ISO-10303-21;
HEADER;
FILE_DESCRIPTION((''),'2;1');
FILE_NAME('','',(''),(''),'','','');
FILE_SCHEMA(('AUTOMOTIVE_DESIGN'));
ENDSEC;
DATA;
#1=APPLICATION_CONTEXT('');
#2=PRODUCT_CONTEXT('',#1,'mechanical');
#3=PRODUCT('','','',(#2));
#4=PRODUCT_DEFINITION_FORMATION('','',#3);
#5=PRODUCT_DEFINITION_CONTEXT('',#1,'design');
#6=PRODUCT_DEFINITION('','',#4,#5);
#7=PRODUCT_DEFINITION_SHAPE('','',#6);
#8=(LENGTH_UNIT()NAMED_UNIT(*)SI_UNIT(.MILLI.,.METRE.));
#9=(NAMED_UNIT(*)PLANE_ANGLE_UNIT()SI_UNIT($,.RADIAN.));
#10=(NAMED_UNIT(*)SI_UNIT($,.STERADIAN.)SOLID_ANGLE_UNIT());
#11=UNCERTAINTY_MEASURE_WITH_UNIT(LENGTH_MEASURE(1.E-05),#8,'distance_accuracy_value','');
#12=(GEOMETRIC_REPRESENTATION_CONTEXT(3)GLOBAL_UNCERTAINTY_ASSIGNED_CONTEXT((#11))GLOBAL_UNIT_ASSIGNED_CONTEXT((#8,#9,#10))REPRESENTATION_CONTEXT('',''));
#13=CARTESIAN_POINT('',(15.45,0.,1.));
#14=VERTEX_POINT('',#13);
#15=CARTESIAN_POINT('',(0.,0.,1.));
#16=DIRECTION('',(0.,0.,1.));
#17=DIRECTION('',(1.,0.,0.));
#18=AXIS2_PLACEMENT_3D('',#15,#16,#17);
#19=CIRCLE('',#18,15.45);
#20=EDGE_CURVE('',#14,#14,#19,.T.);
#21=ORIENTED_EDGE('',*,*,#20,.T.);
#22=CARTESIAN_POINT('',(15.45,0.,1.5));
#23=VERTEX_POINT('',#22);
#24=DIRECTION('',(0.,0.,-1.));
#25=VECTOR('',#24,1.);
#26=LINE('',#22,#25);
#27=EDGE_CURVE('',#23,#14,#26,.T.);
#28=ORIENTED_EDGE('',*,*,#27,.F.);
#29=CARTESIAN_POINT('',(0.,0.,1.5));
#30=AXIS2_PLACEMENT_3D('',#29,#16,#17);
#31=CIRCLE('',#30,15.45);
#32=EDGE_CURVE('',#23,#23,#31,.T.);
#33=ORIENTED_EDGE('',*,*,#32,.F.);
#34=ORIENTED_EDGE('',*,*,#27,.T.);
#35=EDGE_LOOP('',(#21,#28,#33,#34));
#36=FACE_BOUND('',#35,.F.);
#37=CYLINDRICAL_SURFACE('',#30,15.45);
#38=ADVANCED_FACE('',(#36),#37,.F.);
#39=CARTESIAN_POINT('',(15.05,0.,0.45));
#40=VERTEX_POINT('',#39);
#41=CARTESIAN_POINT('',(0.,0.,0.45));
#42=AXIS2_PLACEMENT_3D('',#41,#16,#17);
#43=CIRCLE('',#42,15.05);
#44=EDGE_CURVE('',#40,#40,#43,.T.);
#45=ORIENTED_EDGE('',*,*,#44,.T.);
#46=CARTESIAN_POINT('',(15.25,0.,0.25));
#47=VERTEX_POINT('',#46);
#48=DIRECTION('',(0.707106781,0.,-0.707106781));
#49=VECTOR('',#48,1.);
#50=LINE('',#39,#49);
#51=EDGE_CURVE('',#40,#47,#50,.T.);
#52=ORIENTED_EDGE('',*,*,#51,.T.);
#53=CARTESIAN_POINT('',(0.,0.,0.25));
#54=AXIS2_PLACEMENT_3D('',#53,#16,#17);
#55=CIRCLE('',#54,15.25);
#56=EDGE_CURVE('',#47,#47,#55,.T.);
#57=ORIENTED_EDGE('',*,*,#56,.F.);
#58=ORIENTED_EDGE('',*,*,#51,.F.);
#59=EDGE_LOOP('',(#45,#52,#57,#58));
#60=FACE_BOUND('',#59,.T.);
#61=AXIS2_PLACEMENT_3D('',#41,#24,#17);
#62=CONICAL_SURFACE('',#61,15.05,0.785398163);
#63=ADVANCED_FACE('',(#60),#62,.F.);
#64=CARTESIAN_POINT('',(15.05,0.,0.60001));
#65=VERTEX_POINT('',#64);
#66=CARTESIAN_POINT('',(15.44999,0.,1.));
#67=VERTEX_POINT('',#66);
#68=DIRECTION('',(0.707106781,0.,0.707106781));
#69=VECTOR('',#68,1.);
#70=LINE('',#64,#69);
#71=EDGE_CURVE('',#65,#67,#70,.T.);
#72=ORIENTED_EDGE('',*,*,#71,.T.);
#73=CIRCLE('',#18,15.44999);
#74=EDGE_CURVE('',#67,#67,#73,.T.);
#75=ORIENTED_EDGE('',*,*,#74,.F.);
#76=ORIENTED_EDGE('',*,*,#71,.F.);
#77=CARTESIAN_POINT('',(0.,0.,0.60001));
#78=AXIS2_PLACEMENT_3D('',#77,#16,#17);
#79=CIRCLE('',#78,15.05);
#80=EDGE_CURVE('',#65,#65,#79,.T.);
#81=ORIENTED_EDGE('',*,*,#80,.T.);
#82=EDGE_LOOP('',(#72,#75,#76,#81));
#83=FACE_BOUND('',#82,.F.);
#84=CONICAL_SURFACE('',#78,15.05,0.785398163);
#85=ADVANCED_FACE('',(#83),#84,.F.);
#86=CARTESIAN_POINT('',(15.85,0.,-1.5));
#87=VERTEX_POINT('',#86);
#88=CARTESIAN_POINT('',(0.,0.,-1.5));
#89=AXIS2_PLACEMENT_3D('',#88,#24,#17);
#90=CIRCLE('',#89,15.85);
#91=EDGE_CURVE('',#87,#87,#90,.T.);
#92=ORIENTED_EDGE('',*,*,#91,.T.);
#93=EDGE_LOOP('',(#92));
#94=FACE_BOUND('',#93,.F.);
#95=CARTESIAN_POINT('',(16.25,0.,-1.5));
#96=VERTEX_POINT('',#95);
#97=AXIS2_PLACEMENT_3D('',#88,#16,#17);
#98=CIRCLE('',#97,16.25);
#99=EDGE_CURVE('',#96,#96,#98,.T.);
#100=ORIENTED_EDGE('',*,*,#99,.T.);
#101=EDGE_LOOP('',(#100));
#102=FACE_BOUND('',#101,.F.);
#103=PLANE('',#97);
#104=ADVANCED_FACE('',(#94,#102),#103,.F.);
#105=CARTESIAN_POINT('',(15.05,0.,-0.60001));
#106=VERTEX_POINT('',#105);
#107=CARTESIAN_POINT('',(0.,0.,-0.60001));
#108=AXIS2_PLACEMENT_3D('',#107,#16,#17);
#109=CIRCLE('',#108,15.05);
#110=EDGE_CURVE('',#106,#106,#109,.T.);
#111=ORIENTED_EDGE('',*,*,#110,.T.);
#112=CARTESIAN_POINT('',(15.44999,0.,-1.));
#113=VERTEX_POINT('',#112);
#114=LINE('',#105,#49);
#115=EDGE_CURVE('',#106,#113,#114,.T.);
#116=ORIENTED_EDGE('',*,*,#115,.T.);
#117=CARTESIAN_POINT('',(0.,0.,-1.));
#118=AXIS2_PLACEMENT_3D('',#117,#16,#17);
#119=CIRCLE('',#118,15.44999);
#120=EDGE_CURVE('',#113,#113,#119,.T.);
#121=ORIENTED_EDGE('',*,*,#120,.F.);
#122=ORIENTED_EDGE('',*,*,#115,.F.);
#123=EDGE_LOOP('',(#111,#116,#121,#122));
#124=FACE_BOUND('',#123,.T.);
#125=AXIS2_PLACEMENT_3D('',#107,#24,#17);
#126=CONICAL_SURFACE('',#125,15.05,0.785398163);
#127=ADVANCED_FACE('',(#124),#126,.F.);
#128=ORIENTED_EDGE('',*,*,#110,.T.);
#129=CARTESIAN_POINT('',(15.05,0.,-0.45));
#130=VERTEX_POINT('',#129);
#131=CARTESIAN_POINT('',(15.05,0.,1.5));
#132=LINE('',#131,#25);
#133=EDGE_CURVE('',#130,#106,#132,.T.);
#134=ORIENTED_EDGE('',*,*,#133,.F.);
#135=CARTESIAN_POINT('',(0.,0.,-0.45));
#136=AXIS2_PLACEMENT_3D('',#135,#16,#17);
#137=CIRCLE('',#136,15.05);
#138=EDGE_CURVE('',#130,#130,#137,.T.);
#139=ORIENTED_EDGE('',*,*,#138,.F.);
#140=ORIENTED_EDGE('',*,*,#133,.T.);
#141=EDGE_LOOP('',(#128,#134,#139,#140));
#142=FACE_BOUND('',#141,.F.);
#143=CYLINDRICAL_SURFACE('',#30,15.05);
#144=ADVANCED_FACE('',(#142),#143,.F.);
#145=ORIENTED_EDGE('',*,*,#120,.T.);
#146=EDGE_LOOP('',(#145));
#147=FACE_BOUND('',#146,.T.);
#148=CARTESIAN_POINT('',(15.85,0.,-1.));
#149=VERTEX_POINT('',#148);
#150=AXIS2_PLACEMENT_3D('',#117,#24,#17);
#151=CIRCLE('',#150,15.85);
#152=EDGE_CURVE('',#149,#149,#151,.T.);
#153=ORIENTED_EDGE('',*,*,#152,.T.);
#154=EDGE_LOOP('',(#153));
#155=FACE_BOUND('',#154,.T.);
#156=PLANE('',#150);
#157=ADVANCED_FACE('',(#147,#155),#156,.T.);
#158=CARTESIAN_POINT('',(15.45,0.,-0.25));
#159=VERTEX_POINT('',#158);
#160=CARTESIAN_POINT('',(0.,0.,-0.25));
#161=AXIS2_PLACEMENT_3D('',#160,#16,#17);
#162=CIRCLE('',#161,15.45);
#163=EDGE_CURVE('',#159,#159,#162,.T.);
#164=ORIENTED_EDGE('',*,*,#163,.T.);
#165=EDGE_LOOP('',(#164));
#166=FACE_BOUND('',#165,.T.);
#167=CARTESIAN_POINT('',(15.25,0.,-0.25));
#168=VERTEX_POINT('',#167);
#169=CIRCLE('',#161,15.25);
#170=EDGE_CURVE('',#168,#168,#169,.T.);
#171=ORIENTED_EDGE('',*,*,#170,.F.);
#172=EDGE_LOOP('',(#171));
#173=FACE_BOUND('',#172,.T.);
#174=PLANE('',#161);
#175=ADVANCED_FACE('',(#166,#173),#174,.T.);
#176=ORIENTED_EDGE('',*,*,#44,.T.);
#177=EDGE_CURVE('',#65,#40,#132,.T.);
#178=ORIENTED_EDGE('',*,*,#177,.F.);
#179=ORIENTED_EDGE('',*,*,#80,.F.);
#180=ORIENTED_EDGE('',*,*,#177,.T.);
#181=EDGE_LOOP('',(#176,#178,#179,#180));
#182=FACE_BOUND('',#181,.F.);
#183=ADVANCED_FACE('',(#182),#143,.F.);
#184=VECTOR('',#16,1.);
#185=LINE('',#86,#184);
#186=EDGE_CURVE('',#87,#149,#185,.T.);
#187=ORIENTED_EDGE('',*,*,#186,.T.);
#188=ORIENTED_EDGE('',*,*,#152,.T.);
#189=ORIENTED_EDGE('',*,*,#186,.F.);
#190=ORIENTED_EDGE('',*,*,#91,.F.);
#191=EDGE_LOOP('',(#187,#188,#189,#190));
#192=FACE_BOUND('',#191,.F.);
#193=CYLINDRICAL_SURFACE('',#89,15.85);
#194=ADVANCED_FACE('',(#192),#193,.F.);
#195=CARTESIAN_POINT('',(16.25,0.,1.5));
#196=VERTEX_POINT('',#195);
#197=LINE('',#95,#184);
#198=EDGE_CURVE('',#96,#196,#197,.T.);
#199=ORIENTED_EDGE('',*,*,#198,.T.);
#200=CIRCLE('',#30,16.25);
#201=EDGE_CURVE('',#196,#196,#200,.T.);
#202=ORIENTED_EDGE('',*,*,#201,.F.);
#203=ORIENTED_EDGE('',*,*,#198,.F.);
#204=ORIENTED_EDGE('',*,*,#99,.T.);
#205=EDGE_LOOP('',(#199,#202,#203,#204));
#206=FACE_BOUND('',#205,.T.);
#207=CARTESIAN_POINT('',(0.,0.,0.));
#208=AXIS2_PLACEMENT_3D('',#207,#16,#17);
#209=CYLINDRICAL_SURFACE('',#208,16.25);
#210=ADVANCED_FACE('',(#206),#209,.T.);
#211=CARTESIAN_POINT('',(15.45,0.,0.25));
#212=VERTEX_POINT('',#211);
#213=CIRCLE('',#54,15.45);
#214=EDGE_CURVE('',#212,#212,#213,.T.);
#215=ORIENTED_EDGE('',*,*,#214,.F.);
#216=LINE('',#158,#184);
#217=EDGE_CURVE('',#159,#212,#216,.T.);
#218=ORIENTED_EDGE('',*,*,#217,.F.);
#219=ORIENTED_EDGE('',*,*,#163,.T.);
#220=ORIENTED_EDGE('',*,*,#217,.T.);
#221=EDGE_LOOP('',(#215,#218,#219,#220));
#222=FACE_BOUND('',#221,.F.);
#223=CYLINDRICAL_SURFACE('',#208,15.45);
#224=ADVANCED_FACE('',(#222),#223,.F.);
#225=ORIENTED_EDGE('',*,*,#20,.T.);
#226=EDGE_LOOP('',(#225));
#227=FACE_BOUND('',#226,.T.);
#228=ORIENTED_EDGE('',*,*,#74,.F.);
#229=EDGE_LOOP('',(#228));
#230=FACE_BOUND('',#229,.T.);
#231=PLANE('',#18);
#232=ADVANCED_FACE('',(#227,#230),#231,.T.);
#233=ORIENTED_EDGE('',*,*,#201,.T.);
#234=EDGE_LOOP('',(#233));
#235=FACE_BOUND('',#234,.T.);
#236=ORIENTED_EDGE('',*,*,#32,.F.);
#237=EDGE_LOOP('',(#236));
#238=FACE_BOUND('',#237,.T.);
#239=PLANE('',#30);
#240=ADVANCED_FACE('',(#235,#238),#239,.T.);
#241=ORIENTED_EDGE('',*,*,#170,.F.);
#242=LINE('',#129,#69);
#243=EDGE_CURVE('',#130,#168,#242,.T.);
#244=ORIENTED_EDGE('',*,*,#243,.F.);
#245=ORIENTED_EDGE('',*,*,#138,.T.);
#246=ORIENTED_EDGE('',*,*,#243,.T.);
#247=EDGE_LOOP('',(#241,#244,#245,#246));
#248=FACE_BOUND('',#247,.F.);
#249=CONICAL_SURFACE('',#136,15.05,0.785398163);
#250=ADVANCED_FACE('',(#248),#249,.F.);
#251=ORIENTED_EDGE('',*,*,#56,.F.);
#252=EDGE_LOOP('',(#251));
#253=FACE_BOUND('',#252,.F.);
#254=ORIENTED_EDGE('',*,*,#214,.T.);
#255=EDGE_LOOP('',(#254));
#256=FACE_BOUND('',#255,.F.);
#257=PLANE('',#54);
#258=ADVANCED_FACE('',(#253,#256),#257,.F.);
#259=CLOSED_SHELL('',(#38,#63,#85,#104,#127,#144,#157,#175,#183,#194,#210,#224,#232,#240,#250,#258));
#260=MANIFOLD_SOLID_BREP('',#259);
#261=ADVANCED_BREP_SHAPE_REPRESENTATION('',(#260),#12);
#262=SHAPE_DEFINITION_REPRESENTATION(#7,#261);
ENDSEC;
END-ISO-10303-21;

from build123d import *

# Parameters (mm, degrees)
F0_R      = 16.25
F1_DEPTH  = 1.5
F2_R      = 15.05
F3_DEPTH  = 3.001
F4_R      = 15.45
F5_DEPTH  = 0.25
F6_SIZE   = 0.2
F7_R      = 15.45
F8_DEPTH  = 0.5
F9_R      = 15.85
F10_DEPTH = 0.5
F11_SIZE  = 0.39999


# Not quite as in the source:
# - a fillet or chamfer is up to 0.001 mm smaller than in the source, because OpenCascade refuses the exact size


with BuildPart() as f1:
    # F0 (on Top) → F1 (new body, symmetric)
    with BuildSketch(Plane.XY):
        Circle(F0_R)
    extrude(amount=F1_DEPTH, both=True)

    # F2 (on face) → F3 (cut, through all)
    with BuildSketch(Plane.XY.offset(1.5)):
        Circle(F2_R)
    extrude(amount=-F3_DEPTH, mode=Mode.SUBTRACT)

    # F4 (on Top) → F5 (cut, symmetric)
    with BuildSketch(Plane.XY):
        Circle(F4_R)
    extrude(amount=F5_DEPTH, both=True, mode=Mode.SUBTRACT)

    # F6
    f6_edges = [f1.edges().sort_by_distance(p)[0] for p in [
        (-15.05, 0, 0.25),
        (-15.05, 0, -0.25),
    ]]
    chamfer(f6_edges, length=F6_SIZE)

    # F7 (on face) → F8 (cut)
    with BuildSketch(Plane.XY.offset(1.5)):
        Circle(F7_R)
    extrude(amount=-F8_DEPTH, mode=Mode.SUBTRACT)

    # F9 (on face) → F10 (cut)
    with BuildSketch(Plane(origin=(0, 0, -1.5), x_dir=(1, 0, 0), z_dir=(0, 0, -1))):
        Circle(F9_R)
    extrude(amount=-F10_DEPTH, mode=Mode.SUBTRACT)

    # F11 (size 0.4 in the source; OpenCascade refuses exactly that, so slightly less here)
    f11_edges = [f1.edges().sort_by_distance(p)[0] for p in [
        (-15.05, 0, 1),
        (-15.05, 0, -1),
    ]]
    chamfer(f11_edges, length=F11_SIZE)


solid = f1.part
